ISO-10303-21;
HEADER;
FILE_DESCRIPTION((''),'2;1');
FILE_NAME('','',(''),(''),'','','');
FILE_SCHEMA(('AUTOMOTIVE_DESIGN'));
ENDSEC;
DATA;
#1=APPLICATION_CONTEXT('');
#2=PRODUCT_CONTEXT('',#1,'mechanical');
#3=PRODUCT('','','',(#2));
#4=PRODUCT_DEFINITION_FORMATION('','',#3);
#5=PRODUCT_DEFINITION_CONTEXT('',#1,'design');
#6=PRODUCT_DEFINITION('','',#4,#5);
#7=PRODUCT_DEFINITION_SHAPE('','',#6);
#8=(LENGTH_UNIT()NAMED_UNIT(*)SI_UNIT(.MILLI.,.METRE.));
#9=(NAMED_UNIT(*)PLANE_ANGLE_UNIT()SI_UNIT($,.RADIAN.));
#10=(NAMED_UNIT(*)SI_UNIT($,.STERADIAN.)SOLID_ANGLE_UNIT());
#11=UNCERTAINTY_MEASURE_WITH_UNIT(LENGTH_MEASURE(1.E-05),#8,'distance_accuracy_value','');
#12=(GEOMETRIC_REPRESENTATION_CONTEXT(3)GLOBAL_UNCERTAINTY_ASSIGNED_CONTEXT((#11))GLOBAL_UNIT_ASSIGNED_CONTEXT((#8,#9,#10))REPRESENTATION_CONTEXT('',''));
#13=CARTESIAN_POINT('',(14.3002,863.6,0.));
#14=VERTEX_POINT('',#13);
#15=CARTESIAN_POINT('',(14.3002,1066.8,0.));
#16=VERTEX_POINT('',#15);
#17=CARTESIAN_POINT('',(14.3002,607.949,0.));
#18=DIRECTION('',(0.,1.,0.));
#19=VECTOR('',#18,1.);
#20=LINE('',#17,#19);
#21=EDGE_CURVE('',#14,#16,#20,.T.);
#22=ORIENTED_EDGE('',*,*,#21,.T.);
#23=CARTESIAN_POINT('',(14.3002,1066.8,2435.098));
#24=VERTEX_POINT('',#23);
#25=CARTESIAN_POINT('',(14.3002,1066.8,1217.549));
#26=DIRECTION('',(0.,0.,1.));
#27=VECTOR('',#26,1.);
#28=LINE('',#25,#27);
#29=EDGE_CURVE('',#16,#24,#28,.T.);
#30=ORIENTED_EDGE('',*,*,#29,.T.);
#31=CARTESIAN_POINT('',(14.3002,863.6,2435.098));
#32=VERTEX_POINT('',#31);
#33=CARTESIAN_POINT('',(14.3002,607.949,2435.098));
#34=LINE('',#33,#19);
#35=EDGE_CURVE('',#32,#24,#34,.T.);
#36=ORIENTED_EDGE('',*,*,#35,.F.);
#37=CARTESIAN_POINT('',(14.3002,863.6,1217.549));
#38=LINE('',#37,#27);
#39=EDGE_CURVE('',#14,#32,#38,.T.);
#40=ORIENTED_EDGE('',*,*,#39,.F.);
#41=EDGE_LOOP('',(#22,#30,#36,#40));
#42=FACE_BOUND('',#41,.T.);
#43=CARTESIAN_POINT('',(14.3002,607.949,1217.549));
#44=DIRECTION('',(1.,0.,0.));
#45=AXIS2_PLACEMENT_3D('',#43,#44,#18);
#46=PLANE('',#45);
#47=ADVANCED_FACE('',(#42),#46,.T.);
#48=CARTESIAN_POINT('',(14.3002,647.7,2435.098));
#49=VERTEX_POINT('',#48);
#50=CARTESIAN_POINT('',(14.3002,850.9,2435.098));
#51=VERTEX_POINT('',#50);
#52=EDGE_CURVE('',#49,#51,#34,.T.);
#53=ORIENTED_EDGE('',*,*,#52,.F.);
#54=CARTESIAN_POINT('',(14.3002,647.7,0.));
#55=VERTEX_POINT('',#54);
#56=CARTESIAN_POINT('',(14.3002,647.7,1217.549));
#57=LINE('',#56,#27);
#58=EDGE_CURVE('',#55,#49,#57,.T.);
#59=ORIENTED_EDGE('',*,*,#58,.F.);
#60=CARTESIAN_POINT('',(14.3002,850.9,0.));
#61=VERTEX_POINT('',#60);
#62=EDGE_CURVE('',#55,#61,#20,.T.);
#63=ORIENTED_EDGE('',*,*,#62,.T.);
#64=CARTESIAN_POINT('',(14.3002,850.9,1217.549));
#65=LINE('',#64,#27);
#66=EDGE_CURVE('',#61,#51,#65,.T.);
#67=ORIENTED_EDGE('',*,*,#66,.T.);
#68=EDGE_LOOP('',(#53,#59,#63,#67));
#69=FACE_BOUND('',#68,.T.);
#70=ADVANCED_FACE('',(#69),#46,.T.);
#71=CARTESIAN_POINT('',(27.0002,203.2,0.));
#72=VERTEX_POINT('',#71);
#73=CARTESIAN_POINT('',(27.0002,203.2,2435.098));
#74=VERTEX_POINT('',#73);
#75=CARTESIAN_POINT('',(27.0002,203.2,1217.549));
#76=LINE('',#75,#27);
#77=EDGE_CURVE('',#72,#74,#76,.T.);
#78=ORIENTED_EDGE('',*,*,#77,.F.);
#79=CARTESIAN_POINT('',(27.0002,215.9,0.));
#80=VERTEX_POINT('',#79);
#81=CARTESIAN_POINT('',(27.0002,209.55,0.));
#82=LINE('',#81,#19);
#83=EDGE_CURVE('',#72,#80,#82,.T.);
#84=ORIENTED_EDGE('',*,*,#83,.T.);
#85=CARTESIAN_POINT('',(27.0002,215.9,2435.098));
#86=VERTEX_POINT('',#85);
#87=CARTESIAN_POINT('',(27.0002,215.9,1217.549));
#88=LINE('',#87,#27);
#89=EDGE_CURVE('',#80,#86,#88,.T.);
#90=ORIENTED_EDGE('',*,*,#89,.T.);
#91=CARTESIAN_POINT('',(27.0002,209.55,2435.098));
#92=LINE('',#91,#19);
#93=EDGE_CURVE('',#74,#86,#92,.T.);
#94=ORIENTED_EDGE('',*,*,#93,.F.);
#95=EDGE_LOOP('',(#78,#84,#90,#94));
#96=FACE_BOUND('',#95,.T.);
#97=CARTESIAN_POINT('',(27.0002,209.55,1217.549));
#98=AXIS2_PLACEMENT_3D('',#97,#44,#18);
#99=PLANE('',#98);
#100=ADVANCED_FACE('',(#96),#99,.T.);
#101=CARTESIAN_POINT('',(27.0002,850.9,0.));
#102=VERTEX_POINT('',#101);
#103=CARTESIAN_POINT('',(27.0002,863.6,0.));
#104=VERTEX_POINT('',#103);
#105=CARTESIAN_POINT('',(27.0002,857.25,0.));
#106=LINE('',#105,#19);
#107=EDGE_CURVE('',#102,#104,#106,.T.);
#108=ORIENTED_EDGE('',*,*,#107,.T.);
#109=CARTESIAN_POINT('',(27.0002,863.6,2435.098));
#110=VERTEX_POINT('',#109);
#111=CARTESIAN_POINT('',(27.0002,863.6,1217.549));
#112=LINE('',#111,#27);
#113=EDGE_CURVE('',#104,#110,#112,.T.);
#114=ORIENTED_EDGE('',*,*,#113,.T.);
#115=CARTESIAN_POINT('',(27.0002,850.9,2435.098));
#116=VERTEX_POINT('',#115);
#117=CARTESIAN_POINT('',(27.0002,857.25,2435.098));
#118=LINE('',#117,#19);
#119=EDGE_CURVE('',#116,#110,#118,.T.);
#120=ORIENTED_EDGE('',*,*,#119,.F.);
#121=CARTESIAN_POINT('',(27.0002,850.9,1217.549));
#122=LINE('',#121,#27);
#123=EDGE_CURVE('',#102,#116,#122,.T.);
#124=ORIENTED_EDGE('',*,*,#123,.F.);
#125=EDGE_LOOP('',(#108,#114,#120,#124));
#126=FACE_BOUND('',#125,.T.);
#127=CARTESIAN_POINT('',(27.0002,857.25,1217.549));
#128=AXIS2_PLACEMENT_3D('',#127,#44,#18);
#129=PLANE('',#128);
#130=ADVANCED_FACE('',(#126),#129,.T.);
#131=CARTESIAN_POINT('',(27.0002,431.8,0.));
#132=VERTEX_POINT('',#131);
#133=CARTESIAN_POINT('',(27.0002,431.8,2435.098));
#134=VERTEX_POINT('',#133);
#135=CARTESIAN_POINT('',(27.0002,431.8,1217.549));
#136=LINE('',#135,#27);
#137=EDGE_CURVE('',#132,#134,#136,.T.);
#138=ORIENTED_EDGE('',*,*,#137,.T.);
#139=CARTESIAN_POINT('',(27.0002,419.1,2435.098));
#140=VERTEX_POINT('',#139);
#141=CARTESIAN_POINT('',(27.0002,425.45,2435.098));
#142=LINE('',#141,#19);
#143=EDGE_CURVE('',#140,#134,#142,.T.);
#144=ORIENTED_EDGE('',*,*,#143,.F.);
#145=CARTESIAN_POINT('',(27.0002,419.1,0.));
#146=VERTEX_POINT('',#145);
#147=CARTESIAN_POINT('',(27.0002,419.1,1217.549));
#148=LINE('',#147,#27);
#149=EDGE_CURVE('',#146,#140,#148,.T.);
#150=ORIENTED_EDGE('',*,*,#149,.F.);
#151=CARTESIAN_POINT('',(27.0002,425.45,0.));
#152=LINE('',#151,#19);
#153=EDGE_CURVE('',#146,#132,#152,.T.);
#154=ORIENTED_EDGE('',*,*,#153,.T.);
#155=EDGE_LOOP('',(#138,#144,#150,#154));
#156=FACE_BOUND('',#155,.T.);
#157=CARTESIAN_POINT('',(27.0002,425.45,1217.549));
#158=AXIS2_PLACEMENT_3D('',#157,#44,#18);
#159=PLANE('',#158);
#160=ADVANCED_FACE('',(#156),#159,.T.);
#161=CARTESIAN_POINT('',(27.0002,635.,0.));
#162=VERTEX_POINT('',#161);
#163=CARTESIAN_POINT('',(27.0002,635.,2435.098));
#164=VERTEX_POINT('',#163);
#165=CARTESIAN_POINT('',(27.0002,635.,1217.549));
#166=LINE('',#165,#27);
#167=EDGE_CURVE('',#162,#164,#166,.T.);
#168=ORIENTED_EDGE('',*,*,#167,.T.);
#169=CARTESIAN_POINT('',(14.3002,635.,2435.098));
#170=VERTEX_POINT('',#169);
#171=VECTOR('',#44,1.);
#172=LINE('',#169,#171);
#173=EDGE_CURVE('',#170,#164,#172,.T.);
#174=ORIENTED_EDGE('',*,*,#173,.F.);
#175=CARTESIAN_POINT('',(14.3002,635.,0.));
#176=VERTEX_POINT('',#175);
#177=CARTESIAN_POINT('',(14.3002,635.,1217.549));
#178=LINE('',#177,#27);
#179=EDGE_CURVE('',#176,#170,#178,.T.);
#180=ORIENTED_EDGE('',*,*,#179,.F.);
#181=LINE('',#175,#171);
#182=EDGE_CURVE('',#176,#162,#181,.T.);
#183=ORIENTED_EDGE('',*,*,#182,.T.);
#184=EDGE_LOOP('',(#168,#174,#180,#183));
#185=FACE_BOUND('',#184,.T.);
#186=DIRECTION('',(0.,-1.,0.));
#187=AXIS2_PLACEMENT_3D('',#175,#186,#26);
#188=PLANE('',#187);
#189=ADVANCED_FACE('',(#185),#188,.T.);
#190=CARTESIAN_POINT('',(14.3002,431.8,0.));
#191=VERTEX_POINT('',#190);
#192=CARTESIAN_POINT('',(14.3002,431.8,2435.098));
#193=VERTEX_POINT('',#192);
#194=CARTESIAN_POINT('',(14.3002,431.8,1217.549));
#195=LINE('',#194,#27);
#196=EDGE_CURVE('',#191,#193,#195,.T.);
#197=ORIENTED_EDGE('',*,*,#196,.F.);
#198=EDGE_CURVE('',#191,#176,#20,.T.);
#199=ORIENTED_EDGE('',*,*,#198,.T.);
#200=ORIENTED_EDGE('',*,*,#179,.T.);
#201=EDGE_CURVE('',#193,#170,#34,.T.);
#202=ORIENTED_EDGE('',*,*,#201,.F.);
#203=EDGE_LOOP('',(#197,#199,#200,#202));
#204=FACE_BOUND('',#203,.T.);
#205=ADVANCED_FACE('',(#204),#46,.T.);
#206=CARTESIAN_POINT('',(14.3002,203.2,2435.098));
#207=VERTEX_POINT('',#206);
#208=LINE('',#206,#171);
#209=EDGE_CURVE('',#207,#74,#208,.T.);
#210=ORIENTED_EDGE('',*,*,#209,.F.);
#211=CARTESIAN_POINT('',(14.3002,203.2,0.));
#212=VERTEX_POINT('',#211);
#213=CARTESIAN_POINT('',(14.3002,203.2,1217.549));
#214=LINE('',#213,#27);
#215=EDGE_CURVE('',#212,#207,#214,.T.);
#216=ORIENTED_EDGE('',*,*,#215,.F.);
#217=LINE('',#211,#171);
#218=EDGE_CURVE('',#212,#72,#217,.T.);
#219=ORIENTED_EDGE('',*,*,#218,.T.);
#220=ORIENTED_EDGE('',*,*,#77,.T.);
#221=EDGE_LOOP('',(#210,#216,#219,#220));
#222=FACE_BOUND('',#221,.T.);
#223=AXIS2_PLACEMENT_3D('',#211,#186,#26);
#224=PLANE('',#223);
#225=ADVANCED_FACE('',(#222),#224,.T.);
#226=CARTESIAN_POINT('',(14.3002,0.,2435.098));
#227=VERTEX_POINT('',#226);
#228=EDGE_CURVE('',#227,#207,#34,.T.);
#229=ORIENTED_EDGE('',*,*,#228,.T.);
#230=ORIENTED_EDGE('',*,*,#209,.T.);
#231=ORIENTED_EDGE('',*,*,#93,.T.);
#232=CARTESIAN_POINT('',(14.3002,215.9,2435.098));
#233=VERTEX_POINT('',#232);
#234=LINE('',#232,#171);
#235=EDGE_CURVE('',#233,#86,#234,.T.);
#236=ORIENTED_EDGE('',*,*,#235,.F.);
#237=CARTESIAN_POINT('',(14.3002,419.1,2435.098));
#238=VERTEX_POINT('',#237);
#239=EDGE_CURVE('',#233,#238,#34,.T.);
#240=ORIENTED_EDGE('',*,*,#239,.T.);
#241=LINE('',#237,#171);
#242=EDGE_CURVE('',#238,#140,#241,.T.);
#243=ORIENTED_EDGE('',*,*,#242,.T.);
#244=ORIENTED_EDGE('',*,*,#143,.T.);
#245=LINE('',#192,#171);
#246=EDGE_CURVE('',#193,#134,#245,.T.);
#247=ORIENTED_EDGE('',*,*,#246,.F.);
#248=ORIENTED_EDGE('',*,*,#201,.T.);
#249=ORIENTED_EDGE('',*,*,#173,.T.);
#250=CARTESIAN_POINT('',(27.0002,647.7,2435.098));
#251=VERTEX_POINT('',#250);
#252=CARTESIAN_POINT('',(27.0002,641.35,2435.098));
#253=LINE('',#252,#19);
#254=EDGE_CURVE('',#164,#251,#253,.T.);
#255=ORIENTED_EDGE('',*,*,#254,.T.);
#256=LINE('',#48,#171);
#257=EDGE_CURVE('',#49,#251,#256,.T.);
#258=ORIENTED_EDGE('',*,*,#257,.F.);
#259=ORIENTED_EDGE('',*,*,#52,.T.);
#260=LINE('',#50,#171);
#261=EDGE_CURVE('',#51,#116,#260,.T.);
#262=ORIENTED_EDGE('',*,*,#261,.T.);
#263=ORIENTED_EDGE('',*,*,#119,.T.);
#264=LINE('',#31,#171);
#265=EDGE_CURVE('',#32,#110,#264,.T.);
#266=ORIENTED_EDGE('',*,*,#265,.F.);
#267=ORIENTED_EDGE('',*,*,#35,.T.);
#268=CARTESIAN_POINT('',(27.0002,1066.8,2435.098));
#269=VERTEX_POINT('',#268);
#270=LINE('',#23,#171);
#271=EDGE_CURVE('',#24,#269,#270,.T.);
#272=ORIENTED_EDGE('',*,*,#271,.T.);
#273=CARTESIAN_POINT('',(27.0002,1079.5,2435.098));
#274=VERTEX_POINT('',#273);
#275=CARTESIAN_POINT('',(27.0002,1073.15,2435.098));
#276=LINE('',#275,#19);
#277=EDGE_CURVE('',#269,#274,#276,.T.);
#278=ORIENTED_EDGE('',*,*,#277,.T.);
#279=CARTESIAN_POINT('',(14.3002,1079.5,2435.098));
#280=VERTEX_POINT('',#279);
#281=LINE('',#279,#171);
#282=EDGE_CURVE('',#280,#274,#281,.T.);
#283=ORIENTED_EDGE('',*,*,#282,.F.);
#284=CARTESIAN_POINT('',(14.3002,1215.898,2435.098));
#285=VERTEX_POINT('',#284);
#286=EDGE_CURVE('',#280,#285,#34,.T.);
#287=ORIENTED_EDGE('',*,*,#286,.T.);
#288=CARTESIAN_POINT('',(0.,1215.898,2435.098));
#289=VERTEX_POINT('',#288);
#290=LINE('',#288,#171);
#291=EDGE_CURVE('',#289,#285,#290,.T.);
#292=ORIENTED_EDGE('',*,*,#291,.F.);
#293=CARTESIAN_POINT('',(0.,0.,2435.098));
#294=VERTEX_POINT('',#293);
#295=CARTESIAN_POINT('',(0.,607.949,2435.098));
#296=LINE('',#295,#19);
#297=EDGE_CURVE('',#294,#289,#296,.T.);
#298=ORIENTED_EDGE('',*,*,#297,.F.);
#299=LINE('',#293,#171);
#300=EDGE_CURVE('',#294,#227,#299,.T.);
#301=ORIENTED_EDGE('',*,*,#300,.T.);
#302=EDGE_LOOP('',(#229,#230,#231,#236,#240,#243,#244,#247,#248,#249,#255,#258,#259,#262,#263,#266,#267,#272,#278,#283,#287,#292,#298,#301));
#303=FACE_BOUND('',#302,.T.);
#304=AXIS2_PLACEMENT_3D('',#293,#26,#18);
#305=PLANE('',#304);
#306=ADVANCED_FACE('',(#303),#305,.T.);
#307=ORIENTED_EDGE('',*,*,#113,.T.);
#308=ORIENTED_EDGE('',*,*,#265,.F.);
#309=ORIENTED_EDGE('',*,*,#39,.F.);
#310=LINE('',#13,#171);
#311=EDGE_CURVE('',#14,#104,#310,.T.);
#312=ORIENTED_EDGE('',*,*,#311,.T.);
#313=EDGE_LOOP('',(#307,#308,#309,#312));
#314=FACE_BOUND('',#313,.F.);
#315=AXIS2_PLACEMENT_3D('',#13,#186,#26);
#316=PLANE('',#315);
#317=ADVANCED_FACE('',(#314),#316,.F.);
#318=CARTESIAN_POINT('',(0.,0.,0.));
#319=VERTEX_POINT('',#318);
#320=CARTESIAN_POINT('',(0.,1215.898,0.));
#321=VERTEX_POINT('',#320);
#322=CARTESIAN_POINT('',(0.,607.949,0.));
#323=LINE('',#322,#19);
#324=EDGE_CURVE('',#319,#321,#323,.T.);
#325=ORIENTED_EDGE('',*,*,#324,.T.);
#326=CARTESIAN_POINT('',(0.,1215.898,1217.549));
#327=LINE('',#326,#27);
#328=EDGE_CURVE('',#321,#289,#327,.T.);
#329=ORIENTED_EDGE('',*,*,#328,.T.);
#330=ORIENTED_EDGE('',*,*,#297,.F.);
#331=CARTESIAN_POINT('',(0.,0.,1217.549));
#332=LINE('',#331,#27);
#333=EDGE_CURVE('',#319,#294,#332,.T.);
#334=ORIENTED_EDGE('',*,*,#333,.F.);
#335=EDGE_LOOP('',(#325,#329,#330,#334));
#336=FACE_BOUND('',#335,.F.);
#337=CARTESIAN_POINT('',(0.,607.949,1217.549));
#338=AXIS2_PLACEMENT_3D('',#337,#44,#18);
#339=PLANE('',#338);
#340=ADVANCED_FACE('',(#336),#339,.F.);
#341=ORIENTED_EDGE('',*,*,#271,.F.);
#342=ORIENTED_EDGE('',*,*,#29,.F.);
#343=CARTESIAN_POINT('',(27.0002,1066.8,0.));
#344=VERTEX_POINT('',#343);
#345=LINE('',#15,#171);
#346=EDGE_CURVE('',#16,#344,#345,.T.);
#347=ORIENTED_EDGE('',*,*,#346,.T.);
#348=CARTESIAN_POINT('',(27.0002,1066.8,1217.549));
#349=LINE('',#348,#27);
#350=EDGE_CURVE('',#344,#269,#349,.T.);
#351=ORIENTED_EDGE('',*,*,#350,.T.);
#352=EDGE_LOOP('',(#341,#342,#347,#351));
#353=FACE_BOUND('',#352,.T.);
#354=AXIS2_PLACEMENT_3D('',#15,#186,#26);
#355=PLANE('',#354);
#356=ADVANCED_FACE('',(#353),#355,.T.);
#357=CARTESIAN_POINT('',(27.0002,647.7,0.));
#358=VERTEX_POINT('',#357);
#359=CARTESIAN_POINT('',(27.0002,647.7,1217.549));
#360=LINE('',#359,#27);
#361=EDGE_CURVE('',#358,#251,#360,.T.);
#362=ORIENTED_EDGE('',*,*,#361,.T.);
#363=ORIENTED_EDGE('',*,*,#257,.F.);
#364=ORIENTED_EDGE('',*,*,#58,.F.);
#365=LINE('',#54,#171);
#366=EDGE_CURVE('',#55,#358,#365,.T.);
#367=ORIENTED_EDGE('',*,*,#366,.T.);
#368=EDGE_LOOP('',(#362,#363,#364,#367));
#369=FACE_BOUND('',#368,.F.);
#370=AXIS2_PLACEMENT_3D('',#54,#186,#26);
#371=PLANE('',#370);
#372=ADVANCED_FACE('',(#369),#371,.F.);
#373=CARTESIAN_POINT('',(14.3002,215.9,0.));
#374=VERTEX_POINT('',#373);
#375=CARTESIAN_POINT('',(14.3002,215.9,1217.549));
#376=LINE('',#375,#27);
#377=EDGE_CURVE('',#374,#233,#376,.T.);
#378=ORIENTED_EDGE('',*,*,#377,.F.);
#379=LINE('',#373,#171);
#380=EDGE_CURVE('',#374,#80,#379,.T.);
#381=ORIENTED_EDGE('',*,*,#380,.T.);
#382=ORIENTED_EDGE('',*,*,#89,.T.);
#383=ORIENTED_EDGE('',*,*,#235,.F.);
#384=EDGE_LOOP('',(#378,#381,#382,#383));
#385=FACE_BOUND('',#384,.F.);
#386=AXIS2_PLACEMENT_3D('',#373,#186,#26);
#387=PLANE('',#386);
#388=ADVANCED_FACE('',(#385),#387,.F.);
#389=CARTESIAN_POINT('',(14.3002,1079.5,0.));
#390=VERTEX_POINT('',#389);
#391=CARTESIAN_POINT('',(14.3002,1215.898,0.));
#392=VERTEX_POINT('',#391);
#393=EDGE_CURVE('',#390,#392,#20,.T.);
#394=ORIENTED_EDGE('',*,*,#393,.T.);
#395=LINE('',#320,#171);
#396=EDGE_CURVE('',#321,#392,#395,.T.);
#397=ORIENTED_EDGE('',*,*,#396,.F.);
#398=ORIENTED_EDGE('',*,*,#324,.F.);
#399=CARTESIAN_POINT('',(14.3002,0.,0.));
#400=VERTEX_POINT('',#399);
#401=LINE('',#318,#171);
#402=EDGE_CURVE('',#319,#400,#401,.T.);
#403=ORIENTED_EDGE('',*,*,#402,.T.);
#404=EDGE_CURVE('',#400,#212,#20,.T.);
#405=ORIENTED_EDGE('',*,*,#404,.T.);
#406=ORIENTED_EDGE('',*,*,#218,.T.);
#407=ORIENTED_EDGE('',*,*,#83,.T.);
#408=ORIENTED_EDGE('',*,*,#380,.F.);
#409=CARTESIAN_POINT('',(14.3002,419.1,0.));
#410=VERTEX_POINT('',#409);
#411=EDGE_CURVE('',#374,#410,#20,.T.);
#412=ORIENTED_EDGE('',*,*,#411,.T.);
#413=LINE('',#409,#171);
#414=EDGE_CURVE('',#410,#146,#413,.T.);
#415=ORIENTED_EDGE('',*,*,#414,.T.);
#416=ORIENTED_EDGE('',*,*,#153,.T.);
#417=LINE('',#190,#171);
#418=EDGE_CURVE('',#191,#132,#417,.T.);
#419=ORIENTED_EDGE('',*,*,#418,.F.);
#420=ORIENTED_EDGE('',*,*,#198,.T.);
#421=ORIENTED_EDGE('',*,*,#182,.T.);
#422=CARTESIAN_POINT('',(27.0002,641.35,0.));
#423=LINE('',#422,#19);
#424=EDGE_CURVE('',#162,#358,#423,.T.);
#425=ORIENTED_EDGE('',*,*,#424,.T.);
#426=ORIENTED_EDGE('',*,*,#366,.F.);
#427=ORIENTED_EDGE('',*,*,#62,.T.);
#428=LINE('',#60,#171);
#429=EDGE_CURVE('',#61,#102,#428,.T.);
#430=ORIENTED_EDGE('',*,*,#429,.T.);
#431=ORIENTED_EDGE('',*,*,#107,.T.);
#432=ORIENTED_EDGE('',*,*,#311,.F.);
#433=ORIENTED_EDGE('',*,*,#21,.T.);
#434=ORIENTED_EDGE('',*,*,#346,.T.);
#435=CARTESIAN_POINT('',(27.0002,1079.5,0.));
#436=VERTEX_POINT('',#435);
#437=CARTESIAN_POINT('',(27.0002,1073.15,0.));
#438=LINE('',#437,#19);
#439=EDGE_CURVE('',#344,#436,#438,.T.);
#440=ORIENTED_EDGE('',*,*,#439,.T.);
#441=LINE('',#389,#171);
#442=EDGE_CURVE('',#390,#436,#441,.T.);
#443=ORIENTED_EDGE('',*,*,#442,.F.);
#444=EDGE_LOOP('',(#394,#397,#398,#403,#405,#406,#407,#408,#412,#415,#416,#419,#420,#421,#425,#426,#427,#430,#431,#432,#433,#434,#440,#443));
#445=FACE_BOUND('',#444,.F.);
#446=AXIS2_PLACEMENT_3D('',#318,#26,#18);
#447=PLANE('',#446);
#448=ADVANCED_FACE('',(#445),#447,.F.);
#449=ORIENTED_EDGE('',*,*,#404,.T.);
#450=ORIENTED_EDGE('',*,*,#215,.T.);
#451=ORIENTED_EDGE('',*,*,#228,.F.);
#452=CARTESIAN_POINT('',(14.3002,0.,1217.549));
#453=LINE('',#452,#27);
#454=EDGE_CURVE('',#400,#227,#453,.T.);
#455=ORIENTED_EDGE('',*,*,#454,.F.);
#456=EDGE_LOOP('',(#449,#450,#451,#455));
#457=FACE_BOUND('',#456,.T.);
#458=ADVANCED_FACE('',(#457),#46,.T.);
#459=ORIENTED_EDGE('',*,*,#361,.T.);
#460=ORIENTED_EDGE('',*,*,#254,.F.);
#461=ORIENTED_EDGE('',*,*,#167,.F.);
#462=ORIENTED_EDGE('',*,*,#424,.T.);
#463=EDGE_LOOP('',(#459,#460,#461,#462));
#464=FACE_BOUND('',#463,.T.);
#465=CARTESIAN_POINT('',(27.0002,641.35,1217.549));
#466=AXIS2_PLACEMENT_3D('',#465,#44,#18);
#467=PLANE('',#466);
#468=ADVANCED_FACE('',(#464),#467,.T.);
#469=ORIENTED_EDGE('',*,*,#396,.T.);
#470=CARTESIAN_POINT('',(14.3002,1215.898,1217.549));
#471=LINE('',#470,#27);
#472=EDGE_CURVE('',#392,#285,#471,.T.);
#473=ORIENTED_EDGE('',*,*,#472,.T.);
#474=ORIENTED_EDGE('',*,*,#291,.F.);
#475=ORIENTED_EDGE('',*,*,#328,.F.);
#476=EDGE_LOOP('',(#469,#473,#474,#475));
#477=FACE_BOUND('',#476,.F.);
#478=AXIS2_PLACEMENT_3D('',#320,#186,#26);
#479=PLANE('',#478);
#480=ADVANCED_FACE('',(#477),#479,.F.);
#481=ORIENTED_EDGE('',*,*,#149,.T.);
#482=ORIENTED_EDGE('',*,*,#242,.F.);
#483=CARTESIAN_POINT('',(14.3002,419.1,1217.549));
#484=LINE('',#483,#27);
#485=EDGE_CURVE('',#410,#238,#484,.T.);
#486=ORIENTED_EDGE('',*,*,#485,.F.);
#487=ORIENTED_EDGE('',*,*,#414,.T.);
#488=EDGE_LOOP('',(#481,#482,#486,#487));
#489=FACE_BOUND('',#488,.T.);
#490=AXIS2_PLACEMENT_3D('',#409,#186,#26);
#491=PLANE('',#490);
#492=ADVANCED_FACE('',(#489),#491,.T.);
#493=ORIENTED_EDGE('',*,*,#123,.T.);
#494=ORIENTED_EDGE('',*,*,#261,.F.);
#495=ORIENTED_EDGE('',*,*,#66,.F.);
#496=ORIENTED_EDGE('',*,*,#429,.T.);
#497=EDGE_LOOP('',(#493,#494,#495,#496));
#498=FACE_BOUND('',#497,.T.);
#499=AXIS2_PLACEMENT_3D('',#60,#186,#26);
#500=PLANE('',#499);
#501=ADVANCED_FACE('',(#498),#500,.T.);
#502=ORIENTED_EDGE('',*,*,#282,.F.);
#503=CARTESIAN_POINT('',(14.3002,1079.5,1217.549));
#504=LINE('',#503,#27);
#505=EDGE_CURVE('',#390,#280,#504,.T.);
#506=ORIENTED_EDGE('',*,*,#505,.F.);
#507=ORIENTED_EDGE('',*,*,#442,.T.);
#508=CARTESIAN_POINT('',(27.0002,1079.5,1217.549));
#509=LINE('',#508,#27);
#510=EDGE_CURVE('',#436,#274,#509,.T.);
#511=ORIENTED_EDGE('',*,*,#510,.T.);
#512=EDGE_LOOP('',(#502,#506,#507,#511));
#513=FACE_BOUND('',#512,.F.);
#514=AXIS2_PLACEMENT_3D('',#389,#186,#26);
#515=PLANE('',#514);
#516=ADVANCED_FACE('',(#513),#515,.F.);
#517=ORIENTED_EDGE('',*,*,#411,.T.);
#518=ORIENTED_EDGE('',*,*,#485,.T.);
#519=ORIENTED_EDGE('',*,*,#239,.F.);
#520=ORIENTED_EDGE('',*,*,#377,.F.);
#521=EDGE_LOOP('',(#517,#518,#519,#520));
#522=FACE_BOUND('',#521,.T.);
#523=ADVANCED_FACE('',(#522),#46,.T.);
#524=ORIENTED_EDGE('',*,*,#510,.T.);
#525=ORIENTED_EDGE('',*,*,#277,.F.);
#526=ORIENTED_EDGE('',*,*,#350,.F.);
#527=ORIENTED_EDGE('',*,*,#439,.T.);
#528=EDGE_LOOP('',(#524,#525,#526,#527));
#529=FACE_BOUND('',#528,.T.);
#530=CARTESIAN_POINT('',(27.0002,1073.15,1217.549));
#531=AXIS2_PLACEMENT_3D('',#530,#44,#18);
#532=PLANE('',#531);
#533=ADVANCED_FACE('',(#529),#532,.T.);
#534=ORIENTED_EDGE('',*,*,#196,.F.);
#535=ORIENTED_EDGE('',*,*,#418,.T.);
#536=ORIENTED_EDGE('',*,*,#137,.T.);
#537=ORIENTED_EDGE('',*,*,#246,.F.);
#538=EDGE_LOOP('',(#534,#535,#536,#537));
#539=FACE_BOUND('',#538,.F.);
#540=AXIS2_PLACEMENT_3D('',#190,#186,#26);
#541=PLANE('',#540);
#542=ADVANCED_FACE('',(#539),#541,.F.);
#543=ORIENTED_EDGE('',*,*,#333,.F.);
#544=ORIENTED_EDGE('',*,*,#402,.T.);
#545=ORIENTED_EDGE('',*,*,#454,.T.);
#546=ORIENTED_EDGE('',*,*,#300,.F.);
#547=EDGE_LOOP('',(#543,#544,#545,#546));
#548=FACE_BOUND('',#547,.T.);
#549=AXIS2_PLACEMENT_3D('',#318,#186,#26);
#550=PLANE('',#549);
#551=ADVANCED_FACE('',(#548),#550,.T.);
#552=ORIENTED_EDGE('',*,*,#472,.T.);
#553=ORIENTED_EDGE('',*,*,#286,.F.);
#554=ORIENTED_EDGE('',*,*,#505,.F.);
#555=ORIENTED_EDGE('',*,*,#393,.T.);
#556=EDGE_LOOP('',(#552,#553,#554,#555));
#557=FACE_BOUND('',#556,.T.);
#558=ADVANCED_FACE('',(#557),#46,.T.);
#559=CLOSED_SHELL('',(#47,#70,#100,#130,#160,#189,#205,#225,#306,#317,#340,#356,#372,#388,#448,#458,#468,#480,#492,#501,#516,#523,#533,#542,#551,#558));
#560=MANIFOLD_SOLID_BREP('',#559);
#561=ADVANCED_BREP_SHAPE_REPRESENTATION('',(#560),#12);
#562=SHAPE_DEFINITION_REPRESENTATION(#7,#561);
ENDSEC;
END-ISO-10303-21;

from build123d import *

# Parameters (mm, degrees)
F0_W     = 1215.898
F0_H     = 2435.098
F1_DEPTH = 14.3002
F2_W     = 12.7
F2_H     = 2435.098
F3_DEPTH = 12.7


# Not quite as in the source:
# - a feature names something its author has since deleted; it is built from what else it names


with BuildPart() as f1:
    # F0 (on Right) → F1 (new body)
    with BuildSketch(Plane.YZ):
        with Locations((607.949, 1217.549)):
            Rectangle(F0_W, F0_H)
    extrude(amount=F1_DEPTH)

    # F2 (on face) → F3 (join)
    with BuildSketch(Plane.YZ.offset(14.3002)):
        with Locations((425.45, 1217.549)):
            Rectangle(F2_W, F2_H)
        with Locations((641.35, 1217.549)):
            Rectangle(F2_W, F2_H)
        with Locations((857.25, 1217.549)):
            Rectangle(F2_W, F2_H)
        with Locations((1073.15, 1217.549)):
            Rectangle(F2_W, F2_H)
        with Locations((209.55, 1217.549)):
            Rectangle(F2_W, F2_H)
    extrude(amount=F3_DEPTH)


solid = f1.part
